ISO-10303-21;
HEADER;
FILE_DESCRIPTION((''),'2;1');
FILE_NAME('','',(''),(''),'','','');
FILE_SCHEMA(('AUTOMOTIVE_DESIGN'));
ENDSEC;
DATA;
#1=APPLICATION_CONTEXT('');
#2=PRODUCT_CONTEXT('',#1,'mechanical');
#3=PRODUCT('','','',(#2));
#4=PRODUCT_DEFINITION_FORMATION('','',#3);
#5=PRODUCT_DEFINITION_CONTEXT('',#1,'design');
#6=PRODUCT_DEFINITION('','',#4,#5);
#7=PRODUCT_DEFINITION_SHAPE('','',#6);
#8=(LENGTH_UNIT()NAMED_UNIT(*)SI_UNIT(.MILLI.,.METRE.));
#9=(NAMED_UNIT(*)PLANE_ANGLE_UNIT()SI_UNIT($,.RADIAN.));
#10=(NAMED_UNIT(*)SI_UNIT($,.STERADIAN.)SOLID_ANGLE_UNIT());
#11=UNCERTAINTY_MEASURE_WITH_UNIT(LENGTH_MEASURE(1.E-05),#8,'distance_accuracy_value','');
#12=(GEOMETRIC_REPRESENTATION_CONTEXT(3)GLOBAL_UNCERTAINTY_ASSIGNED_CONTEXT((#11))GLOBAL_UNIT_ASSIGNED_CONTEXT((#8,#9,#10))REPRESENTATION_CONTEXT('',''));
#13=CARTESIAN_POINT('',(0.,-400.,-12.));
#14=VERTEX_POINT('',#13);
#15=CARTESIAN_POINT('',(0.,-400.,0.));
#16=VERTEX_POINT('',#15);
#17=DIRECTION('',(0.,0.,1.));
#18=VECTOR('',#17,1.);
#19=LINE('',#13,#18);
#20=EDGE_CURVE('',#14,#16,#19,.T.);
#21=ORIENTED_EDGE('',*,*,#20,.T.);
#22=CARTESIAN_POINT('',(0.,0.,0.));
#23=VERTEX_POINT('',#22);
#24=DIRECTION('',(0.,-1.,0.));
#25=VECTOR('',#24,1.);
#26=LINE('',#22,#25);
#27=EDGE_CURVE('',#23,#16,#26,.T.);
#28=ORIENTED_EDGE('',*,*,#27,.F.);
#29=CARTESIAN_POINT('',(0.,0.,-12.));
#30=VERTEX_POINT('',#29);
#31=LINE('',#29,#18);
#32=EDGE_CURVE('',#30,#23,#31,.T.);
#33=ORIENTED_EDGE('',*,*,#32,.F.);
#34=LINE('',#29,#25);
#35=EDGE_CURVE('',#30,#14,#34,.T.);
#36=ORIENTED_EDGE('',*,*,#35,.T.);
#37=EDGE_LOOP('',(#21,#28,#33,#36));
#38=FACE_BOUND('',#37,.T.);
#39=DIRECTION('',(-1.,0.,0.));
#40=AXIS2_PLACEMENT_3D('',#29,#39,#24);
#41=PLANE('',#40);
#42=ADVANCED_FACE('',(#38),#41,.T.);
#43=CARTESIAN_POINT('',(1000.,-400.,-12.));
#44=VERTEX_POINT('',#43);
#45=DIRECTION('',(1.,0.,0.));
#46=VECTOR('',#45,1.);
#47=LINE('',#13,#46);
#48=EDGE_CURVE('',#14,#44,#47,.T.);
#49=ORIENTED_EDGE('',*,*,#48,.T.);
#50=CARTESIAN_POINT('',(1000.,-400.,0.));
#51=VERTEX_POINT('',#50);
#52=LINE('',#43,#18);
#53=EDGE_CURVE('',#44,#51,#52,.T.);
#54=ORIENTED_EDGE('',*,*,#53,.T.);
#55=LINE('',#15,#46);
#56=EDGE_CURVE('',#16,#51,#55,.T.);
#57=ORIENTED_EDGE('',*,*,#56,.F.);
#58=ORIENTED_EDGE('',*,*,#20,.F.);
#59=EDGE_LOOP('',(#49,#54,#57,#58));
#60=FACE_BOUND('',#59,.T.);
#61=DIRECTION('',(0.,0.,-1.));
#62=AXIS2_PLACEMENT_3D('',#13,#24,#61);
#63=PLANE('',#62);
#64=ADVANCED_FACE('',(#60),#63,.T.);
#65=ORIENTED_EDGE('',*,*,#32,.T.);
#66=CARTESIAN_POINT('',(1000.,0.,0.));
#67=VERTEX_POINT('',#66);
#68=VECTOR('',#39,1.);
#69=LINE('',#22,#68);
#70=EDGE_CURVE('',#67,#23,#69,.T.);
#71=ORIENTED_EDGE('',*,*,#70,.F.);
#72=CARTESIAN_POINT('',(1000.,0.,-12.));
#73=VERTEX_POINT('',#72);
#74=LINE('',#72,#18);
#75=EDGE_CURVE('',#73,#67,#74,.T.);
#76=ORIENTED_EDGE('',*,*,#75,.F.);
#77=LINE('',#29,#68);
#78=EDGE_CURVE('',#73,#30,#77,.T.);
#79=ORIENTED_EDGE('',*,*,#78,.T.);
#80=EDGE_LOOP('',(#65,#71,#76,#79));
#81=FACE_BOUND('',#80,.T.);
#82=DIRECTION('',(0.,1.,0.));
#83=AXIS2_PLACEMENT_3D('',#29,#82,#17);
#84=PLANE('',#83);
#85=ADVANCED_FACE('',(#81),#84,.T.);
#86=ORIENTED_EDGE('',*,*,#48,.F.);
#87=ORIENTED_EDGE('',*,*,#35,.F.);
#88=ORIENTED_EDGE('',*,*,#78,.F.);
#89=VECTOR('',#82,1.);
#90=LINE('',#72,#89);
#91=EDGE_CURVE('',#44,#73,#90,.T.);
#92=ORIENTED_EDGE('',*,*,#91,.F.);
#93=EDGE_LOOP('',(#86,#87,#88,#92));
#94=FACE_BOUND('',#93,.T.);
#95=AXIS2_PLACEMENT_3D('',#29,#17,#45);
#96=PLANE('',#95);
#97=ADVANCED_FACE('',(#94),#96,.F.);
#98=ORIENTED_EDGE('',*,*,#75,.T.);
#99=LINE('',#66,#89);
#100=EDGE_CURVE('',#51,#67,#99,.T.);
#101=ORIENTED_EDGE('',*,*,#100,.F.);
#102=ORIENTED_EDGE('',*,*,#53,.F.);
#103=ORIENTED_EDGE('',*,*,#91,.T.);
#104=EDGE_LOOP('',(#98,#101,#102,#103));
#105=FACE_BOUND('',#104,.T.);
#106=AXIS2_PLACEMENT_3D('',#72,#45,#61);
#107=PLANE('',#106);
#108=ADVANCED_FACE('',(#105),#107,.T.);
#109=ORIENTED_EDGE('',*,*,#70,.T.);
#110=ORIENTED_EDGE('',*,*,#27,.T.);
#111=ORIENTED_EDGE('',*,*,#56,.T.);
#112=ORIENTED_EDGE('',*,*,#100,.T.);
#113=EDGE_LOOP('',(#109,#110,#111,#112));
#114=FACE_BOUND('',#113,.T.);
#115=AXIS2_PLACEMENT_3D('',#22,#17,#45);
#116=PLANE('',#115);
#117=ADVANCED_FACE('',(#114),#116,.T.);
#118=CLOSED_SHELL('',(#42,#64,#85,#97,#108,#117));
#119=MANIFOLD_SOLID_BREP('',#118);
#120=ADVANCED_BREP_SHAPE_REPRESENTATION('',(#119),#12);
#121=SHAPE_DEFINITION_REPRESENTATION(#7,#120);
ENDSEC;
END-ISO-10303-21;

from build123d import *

# Parameters (mm, degrees)
IZIM1_W            = 1000
IZIM1_H            = 400
TABAN_FLAN_1_DEPTH = 12


# Sheet-metal steps are written as plain solids
with BuildPart() as part:
    # Çizim1 → Taban-Flanş1 (new body)
    with BuildSketch(Plane.XY):
        with Locations((500, -200)):
            Rectangle(IZIM1_W, IZIM1_H)
    extrude(amount=-TABAN_FLAN_1_DEPTH)


solid = part.part
